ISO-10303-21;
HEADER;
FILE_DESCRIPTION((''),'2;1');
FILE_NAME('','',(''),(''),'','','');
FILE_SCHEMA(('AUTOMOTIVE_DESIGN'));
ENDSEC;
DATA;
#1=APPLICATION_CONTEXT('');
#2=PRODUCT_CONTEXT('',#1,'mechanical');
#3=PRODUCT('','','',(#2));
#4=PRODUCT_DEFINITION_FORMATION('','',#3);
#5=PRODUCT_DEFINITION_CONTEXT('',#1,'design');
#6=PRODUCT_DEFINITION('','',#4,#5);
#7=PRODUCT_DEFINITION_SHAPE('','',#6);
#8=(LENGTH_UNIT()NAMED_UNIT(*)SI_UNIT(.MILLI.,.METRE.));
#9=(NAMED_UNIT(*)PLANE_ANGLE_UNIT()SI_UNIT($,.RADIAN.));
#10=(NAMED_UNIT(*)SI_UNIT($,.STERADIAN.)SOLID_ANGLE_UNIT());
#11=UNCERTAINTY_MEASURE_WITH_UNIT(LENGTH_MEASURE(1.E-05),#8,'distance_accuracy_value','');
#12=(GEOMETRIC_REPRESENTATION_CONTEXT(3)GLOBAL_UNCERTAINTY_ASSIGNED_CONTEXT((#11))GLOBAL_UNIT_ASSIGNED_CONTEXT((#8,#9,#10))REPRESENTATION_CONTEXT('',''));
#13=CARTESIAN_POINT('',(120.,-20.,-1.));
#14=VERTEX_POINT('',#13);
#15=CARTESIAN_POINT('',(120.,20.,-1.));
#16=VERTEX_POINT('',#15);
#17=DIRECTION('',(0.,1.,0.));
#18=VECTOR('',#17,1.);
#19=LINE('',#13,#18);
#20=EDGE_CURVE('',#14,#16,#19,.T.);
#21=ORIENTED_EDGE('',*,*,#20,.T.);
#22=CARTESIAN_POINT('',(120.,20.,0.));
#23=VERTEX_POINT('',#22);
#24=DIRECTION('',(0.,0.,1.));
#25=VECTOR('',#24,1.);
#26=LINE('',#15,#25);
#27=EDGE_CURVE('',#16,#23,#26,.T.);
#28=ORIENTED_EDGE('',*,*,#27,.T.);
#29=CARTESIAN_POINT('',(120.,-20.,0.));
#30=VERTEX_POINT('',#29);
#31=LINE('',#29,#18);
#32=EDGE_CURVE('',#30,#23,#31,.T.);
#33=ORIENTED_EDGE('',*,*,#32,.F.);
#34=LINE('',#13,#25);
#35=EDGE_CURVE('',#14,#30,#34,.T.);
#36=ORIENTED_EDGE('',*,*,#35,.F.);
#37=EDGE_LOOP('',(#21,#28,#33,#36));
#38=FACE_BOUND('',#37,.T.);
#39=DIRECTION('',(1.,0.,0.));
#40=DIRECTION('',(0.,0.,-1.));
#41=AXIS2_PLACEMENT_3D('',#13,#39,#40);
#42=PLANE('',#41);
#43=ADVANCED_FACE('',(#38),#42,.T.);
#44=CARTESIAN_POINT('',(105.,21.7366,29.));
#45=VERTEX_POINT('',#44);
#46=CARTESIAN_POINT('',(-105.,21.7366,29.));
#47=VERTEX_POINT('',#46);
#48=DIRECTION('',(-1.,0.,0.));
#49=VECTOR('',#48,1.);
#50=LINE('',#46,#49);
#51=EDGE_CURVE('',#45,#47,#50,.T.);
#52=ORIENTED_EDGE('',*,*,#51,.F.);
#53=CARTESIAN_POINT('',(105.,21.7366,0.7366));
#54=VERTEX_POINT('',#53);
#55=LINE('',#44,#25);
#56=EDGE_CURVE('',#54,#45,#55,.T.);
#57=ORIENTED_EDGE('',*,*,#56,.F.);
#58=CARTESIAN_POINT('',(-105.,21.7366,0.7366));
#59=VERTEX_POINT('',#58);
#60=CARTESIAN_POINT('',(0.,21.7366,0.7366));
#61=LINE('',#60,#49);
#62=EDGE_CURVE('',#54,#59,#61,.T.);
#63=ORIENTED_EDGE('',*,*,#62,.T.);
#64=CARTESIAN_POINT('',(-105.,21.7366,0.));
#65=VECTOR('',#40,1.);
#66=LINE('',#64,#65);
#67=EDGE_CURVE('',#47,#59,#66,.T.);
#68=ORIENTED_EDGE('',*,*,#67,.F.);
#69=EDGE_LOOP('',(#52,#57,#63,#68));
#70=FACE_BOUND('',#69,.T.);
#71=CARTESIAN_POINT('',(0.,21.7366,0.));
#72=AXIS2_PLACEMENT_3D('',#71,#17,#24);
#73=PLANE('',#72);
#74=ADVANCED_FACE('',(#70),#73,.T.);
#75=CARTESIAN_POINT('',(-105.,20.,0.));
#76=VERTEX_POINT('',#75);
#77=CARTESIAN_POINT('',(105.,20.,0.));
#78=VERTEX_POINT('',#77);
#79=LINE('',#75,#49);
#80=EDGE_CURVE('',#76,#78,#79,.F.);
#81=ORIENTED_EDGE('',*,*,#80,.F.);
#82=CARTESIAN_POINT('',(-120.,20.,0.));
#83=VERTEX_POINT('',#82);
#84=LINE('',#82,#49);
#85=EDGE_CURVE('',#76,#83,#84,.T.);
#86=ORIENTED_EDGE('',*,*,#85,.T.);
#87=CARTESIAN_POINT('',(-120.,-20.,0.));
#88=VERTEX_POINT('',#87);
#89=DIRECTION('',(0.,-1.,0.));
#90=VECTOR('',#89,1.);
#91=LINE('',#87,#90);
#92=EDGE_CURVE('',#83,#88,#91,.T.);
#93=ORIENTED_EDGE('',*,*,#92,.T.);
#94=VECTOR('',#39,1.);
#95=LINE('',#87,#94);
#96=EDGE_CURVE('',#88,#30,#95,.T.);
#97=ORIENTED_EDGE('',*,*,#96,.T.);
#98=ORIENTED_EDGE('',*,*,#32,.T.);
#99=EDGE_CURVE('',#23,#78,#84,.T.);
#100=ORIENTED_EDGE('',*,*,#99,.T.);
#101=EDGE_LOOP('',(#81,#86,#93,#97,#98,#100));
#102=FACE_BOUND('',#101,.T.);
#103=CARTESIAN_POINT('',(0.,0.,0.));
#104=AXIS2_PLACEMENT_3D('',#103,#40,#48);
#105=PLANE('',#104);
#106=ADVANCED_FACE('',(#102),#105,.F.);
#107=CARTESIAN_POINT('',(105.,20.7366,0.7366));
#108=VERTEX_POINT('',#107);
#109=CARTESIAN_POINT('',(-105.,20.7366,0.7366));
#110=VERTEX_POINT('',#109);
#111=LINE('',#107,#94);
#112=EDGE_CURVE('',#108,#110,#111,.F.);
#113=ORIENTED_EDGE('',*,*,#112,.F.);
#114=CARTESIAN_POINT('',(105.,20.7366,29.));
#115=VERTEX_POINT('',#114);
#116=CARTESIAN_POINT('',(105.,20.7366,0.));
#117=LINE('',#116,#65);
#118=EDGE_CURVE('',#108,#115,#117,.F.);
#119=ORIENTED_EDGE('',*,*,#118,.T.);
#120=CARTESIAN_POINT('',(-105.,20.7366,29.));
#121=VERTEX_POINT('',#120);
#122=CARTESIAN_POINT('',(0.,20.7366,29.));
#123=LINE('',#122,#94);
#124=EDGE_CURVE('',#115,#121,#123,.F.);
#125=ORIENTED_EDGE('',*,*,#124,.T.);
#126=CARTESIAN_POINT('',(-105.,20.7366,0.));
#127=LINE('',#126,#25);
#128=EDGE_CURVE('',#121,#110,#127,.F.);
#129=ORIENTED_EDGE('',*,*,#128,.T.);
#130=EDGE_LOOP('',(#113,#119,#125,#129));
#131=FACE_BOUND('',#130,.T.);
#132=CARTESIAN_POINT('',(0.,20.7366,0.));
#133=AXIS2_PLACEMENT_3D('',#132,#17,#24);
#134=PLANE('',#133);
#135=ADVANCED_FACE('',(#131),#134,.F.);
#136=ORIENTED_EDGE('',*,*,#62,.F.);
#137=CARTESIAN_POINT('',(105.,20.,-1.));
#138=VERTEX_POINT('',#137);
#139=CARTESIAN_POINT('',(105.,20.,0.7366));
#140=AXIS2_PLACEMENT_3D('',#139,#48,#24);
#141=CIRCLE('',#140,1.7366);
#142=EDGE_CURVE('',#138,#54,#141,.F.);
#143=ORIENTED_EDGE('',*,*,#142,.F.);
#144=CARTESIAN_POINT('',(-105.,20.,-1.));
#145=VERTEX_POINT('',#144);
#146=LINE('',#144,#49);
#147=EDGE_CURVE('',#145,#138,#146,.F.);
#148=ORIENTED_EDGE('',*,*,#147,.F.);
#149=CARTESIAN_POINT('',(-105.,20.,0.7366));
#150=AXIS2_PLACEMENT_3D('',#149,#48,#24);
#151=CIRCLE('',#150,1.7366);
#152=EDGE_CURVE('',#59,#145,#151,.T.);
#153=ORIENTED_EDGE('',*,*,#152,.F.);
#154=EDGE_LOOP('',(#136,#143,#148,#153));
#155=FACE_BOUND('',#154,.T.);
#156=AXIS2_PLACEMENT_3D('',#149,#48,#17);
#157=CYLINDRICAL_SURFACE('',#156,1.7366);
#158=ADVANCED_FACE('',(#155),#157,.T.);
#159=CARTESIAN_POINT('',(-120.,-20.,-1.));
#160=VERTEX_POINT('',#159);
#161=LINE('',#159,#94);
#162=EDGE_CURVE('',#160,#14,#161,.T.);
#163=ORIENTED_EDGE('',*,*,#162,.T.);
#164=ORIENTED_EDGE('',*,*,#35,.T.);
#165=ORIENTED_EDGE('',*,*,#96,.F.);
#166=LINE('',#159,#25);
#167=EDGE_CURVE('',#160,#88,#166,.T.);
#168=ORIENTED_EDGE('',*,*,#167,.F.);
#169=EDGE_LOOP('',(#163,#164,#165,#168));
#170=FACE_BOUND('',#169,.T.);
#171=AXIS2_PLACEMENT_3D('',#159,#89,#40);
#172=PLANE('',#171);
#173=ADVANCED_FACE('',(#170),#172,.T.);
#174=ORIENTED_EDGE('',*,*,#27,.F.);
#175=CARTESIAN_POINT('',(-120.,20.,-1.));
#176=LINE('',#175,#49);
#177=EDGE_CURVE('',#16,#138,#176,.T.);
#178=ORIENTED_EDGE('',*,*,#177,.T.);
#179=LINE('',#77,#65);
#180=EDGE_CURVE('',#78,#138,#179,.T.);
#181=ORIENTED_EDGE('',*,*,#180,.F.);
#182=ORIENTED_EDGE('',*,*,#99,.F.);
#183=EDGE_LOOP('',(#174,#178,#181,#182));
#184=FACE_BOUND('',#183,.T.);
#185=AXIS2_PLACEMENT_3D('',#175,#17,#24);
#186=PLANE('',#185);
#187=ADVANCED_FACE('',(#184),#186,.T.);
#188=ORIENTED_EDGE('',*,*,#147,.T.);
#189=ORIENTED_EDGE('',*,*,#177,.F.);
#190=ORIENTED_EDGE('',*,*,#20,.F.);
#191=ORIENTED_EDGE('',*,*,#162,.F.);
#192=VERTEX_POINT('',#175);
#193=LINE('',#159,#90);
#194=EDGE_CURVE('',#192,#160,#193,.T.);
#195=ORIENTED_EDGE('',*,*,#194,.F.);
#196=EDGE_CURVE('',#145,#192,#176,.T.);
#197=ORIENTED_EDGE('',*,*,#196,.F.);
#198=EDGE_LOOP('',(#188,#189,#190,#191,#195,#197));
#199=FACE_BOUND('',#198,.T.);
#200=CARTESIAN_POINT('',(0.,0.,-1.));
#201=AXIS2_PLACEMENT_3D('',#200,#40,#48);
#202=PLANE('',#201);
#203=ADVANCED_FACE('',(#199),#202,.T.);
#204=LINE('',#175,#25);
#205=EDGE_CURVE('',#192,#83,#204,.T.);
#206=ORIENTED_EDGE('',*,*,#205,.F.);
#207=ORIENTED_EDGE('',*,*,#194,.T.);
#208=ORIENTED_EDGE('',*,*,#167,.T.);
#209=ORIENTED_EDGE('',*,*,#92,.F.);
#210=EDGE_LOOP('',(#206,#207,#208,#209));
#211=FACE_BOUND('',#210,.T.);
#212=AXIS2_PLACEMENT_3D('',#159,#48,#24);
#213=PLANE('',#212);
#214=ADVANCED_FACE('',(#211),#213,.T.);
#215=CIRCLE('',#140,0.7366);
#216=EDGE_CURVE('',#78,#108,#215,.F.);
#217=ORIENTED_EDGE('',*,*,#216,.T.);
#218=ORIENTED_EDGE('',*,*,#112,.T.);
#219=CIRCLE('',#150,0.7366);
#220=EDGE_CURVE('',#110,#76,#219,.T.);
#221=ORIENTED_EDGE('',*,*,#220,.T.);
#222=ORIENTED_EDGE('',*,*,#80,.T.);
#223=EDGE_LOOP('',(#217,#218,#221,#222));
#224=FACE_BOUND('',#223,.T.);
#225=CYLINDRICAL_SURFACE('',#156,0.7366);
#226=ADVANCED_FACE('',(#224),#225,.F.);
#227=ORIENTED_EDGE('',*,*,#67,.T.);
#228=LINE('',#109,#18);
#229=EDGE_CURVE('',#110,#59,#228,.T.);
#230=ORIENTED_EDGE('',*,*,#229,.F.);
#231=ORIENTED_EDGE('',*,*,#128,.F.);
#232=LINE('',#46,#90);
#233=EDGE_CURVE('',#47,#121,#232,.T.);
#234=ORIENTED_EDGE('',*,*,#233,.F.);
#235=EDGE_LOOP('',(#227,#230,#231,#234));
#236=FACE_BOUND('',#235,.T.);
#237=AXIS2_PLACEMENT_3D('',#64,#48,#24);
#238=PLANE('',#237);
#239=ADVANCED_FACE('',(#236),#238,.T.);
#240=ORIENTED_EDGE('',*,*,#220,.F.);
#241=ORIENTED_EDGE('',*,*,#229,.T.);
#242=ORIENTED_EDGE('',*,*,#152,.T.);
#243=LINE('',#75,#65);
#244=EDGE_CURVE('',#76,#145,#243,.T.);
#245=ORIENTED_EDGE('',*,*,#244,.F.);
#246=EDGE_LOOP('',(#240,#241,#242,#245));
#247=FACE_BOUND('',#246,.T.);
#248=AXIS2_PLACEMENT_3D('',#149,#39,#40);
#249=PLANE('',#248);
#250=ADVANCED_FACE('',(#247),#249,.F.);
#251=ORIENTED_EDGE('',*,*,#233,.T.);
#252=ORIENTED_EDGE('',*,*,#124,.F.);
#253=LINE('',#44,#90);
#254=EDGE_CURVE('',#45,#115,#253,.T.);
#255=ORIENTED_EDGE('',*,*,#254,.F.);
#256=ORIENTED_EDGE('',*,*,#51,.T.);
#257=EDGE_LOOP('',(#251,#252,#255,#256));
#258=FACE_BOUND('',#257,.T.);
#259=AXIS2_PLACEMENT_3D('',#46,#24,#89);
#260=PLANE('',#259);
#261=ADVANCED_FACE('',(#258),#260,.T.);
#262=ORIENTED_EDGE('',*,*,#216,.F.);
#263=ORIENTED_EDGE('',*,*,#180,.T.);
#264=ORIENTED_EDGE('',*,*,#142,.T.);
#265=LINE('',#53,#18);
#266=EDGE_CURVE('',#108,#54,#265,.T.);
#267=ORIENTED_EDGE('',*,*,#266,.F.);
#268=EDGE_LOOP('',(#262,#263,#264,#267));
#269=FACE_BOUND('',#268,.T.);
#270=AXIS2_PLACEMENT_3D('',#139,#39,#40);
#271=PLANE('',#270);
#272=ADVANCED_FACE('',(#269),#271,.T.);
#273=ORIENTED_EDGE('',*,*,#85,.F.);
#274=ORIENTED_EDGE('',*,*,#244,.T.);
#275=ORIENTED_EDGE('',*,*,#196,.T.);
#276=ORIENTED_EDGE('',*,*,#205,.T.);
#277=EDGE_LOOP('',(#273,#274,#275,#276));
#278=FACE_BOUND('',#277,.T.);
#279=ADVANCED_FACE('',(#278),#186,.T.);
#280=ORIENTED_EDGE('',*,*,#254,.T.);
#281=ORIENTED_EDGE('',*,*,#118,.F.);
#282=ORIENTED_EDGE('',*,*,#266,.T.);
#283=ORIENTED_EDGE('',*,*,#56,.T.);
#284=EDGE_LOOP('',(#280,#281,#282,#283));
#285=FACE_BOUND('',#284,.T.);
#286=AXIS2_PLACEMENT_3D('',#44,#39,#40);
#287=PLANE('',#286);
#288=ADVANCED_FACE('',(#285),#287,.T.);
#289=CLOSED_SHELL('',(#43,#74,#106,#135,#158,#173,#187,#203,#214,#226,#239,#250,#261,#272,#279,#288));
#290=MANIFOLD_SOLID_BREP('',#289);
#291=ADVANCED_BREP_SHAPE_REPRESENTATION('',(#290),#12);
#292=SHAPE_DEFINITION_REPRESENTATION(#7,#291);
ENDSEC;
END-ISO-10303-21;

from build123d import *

# Parameters (mm, degrees)
SKETCH_1_W             = 240
SKETCH_1_H             = 40
SM_BASE_FLANGE_1_DEPTH = 1
SM_EDGE_FLANGE_1_DEPTH = 210


# Sheet-metal steps are written as plain solids
with BuildPart() as part:
    # Sketch 1 → 基体-法兰1 (new body)
    with BuildSketch(Plane.XY):
        Rectangle(SKETCH_1_W, SKETCH_1_H)
    extrude(amount=-SM_BASE_FLANGE_1_DEPTH)

    # 边线-法兰1 section (across the edge) → 边线-法兰1 (add)
    with BuildSketch(Plane(origin=(105, 20.7366, 0), x_dir=(0, -1, 0), z_dir=(-1, 0, 0))):
        with BuildLine():
            Line((-1, 0.7366), (-1, 29))
            Line((-1, 29), (0, 29))
            Line((0, 29), (0, 0.7366))
            ThreePointArc((0, 0.7366), (0.215745145, 0.215745145), (0.7366, 0))
            Line((0.7366, 0), (0.7366, -1))
            ThreePointArc((0.7366, -1), (-0.491361636, -0.491361636), (-1, 0.7366))
        make_face()
    extrude(amount=SM_EDGE_FLANGE_1_DEPTH)


solid = part.part
